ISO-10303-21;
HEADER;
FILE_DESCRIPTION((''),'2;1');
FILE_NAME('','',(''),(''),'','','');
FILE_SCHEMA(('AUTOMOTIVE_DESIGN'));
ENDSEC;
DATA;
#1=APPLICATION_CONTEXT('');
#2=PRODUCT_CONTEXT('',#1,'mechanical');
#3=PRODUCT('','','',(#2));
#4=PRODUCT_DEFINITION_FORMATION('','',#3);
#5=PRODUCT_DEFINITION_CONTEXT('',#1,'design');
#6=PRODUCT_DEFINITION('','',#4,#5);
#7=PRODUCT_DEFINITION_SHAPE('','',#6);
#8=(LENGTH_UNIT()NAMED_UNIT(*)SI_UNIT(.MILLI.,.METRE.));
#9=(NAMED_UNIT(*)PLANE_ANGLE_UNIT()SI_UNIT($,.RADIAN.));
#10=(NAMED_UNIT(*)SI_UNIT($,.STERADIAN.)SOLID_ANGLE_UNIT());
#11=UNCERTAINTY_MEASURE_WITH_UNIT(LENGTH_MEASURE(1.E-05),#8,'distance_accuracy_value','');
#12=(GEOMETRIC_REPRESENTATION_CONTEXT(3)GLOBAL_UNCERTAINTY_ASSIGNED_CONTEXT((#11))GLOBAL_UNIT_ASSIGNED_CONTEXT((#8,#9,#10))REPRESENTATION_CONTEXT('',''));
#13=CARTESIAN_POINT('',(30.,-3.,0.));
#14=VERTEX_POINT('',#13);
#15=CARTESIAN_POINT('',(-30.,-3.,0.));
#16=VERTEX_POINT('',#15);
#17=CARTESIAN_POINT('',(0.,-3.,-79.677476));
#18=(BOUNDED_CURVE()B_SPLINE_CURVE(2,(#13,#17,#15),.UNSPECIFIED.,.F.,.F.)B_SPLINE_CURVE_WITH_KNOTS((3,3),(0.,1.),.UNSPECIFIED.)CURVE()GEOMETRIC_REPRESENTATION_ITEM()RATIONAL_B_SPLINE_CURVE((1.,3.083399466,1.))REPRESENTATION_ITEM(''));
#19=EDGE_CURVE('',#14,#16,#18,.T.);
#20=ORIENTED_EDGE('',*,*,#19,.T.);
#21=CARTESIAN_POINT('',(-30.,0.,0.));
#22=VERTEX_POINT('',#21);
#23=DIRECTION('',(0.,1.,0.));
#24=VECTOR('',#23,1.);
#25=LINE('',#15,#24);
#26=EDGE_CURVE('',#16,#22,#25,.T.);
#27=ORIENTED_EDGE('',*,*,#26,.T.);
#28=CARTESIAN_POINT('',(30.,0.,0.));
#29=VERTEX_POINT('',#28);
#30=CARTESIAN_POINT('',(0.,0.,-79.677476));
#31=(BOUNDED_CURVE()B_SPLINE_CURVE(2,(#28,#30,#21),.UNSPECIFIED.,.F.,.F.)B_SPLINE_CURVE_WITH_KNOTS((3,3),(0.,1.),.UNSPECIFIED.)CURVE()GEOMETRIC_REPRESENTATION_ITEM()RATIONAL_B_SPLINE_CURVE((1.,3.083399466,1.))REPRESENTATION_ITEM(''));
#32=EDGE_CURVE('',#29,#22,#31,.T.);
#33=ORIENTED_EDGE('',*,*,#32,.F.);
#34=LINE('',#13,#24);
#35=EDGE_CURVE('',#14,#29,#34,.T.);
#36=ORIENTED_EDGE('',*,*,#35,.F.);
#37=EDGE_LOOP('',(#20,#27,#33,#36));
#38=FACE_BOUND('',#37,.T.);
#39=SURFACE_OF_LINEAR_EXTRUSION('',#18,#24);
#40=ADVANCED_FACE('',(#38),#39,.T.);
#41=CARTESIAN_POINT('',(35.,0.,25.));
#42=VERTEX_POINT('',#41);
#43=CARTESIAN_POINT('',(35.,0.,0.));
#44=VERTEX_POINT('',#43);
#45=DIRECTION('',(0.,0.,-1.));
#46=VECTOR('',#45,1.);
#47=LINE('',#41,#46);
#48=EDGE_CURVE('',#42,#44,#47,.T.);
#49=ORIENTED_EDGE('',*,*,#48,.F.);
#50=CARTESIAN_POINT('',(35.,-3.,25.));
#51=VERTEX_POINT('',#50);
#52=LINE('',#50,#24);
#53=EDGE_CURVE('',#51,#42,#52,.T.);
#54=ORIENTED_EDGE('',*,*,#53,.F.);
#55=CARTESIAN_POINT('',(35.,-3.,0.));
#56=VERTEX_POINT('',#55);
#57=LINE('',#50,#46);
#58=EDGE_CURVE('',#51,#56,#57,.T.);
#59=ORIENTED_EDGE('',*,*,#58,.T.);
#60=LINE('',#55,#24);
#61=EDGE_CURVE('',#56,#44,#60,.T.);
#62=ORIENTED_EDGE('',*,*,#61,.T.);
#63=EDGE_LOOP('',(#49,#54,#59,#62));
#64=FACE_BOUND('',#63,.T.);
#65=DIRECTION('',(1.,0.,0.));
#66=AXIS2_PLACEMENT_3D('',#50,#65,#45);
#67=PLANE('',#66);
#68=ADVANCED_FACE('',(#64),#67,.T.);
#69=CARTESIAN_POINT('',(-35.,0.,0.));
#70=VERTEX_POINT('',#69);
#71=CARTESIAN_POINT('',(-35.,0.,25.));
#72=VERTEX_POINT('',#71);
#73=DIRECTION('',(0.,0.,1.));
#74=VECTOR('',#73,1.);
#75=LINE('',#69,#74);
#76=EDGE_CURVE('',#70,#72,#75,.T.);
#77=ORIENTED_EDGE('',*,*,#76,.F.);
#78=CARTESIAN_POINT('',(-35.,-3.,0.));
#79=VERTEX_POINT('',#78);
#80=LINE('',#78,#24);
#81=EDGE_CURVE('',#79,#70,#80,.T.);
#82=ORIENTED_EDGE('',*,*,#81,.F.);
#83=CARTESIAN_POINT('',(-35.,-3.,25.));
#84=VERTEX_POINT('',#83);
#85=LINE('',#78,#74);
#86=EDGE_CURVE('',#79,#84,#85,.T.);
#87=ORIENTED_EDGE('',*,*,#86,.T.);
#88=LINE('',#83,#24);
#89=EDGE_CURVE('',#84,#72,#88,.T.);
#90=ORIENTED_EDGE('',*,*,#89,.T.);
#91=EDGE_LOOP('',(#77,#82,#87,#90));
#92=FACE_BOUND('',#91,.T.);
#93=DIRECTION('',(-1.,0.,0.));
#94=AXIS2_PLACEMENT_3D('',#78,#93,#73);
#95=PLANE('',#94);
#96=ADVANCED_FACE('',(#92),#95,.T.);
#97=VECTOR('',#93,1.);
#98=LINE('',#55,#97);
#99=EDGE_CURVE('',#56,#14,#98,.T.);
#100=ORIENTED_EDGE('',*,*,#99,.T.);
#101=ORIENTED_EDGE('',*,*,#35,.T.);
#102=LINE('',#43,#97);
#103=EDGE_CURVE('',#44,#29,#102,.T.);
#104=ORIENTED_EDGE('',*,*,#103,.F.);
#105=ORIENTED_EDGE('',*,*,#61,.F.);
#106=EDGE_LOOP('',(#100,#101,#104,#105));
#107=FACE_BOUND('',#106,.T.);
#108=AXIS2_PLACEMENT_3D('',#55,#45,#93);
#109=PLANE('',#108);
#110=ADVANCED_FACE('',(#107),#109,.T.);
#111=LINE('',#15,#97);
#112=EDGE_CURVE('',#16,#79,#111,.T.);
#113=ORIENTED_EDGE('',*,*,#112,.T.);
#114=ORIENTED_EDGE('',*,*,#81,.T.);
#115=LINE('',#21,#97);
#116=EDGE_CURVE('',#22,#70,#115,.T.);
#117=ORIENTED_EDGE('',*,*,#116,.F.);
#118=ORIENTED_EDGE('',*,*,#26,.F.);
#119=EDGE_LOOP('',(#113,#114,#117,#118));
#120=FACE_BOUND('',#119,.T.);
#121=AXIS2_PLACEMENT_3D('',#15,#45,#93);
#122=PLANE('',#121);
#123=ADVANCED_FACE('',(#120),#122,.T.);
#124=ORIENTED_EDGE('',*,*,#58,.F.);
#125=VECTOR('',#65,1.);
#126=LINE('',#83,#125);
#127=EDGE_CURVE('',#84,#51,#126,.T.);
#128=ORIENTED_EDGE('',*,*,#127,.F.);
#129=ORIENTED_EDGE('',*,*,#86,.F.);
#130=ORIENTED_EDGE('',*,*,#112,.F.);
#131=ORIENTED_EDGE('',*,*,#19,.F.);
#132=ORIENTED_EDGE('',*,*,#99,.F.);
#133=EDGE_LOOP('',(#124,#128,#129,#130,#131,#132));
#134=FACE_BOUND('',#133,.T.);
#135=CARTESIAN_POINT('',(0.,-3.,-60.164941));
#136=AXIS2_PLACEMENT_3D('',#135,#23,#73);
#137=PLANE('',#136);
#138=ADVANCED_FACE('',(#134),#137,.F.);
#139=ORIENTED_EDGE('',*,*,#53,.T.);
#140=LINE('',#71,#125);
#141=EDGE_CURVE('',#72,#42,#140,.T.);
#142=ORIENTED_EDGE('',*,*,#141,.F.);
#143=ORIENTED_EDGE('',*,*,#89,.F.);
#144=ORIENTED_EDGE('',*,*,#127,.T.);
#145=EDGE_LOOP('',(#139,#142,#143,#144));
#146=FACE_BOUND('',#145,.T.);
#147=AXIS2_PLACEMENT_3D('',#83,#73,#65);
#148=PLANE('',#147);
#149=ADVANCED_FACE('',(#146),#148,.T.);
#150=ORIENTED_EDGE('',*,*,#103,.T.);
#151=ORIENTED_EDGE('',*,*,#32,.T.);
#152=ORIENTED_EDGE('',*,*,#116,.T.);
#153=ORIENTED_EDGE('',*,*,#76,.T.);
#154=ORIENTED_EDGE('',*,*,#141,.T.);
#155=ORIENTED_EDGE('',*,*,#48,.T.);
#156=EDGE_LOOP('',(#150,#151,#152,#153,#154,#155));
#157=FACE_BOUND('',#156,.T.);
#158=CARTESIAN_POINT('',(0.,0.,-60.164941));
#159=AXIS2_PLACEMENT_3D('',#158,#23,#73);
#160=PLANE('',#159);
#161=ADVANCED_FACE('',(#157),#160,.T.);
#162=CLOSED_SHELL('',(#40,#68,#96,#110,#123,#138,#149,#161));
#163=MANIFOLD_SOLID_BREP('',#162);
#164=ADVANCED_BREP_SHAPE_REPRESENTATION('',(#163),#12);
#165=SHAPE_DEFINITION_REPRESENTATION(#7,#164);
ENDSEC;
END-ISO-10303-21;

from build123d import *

# Parameters (mm, degrees)
BASE_FLANGE1_DEPTH = 3


# Sheet-metal steps are written as plain solids
with BuildPart() as part:
    # Sketch1 → Base-Flange1 (new body)
    with BuildSketch(Plane(origin=(0, 0, 0), x_dir=(1, 0, 0), z_dir=(0, 1, 0))):
        with BuildLine():
            Line((-30, 0), (-35, 0))
            Line((-35, 0), (-35, -25))
            Line((-35, -25), (35, -25))
            Line((35, -25), (35, 0))
            Line((35, 0), (30, 0))
            add(Edge.make_bspline(
                [(-30, 0), (0, 79.677475969), (30, 0)],
                knots=[0, 0, 0, 1, 1, 1], degree=2, weights=[1, 3.083399466, 1]))
        make_face()
    extrude(amount=-BASE_FLANGE1_DEPTH)


solid = part.part
